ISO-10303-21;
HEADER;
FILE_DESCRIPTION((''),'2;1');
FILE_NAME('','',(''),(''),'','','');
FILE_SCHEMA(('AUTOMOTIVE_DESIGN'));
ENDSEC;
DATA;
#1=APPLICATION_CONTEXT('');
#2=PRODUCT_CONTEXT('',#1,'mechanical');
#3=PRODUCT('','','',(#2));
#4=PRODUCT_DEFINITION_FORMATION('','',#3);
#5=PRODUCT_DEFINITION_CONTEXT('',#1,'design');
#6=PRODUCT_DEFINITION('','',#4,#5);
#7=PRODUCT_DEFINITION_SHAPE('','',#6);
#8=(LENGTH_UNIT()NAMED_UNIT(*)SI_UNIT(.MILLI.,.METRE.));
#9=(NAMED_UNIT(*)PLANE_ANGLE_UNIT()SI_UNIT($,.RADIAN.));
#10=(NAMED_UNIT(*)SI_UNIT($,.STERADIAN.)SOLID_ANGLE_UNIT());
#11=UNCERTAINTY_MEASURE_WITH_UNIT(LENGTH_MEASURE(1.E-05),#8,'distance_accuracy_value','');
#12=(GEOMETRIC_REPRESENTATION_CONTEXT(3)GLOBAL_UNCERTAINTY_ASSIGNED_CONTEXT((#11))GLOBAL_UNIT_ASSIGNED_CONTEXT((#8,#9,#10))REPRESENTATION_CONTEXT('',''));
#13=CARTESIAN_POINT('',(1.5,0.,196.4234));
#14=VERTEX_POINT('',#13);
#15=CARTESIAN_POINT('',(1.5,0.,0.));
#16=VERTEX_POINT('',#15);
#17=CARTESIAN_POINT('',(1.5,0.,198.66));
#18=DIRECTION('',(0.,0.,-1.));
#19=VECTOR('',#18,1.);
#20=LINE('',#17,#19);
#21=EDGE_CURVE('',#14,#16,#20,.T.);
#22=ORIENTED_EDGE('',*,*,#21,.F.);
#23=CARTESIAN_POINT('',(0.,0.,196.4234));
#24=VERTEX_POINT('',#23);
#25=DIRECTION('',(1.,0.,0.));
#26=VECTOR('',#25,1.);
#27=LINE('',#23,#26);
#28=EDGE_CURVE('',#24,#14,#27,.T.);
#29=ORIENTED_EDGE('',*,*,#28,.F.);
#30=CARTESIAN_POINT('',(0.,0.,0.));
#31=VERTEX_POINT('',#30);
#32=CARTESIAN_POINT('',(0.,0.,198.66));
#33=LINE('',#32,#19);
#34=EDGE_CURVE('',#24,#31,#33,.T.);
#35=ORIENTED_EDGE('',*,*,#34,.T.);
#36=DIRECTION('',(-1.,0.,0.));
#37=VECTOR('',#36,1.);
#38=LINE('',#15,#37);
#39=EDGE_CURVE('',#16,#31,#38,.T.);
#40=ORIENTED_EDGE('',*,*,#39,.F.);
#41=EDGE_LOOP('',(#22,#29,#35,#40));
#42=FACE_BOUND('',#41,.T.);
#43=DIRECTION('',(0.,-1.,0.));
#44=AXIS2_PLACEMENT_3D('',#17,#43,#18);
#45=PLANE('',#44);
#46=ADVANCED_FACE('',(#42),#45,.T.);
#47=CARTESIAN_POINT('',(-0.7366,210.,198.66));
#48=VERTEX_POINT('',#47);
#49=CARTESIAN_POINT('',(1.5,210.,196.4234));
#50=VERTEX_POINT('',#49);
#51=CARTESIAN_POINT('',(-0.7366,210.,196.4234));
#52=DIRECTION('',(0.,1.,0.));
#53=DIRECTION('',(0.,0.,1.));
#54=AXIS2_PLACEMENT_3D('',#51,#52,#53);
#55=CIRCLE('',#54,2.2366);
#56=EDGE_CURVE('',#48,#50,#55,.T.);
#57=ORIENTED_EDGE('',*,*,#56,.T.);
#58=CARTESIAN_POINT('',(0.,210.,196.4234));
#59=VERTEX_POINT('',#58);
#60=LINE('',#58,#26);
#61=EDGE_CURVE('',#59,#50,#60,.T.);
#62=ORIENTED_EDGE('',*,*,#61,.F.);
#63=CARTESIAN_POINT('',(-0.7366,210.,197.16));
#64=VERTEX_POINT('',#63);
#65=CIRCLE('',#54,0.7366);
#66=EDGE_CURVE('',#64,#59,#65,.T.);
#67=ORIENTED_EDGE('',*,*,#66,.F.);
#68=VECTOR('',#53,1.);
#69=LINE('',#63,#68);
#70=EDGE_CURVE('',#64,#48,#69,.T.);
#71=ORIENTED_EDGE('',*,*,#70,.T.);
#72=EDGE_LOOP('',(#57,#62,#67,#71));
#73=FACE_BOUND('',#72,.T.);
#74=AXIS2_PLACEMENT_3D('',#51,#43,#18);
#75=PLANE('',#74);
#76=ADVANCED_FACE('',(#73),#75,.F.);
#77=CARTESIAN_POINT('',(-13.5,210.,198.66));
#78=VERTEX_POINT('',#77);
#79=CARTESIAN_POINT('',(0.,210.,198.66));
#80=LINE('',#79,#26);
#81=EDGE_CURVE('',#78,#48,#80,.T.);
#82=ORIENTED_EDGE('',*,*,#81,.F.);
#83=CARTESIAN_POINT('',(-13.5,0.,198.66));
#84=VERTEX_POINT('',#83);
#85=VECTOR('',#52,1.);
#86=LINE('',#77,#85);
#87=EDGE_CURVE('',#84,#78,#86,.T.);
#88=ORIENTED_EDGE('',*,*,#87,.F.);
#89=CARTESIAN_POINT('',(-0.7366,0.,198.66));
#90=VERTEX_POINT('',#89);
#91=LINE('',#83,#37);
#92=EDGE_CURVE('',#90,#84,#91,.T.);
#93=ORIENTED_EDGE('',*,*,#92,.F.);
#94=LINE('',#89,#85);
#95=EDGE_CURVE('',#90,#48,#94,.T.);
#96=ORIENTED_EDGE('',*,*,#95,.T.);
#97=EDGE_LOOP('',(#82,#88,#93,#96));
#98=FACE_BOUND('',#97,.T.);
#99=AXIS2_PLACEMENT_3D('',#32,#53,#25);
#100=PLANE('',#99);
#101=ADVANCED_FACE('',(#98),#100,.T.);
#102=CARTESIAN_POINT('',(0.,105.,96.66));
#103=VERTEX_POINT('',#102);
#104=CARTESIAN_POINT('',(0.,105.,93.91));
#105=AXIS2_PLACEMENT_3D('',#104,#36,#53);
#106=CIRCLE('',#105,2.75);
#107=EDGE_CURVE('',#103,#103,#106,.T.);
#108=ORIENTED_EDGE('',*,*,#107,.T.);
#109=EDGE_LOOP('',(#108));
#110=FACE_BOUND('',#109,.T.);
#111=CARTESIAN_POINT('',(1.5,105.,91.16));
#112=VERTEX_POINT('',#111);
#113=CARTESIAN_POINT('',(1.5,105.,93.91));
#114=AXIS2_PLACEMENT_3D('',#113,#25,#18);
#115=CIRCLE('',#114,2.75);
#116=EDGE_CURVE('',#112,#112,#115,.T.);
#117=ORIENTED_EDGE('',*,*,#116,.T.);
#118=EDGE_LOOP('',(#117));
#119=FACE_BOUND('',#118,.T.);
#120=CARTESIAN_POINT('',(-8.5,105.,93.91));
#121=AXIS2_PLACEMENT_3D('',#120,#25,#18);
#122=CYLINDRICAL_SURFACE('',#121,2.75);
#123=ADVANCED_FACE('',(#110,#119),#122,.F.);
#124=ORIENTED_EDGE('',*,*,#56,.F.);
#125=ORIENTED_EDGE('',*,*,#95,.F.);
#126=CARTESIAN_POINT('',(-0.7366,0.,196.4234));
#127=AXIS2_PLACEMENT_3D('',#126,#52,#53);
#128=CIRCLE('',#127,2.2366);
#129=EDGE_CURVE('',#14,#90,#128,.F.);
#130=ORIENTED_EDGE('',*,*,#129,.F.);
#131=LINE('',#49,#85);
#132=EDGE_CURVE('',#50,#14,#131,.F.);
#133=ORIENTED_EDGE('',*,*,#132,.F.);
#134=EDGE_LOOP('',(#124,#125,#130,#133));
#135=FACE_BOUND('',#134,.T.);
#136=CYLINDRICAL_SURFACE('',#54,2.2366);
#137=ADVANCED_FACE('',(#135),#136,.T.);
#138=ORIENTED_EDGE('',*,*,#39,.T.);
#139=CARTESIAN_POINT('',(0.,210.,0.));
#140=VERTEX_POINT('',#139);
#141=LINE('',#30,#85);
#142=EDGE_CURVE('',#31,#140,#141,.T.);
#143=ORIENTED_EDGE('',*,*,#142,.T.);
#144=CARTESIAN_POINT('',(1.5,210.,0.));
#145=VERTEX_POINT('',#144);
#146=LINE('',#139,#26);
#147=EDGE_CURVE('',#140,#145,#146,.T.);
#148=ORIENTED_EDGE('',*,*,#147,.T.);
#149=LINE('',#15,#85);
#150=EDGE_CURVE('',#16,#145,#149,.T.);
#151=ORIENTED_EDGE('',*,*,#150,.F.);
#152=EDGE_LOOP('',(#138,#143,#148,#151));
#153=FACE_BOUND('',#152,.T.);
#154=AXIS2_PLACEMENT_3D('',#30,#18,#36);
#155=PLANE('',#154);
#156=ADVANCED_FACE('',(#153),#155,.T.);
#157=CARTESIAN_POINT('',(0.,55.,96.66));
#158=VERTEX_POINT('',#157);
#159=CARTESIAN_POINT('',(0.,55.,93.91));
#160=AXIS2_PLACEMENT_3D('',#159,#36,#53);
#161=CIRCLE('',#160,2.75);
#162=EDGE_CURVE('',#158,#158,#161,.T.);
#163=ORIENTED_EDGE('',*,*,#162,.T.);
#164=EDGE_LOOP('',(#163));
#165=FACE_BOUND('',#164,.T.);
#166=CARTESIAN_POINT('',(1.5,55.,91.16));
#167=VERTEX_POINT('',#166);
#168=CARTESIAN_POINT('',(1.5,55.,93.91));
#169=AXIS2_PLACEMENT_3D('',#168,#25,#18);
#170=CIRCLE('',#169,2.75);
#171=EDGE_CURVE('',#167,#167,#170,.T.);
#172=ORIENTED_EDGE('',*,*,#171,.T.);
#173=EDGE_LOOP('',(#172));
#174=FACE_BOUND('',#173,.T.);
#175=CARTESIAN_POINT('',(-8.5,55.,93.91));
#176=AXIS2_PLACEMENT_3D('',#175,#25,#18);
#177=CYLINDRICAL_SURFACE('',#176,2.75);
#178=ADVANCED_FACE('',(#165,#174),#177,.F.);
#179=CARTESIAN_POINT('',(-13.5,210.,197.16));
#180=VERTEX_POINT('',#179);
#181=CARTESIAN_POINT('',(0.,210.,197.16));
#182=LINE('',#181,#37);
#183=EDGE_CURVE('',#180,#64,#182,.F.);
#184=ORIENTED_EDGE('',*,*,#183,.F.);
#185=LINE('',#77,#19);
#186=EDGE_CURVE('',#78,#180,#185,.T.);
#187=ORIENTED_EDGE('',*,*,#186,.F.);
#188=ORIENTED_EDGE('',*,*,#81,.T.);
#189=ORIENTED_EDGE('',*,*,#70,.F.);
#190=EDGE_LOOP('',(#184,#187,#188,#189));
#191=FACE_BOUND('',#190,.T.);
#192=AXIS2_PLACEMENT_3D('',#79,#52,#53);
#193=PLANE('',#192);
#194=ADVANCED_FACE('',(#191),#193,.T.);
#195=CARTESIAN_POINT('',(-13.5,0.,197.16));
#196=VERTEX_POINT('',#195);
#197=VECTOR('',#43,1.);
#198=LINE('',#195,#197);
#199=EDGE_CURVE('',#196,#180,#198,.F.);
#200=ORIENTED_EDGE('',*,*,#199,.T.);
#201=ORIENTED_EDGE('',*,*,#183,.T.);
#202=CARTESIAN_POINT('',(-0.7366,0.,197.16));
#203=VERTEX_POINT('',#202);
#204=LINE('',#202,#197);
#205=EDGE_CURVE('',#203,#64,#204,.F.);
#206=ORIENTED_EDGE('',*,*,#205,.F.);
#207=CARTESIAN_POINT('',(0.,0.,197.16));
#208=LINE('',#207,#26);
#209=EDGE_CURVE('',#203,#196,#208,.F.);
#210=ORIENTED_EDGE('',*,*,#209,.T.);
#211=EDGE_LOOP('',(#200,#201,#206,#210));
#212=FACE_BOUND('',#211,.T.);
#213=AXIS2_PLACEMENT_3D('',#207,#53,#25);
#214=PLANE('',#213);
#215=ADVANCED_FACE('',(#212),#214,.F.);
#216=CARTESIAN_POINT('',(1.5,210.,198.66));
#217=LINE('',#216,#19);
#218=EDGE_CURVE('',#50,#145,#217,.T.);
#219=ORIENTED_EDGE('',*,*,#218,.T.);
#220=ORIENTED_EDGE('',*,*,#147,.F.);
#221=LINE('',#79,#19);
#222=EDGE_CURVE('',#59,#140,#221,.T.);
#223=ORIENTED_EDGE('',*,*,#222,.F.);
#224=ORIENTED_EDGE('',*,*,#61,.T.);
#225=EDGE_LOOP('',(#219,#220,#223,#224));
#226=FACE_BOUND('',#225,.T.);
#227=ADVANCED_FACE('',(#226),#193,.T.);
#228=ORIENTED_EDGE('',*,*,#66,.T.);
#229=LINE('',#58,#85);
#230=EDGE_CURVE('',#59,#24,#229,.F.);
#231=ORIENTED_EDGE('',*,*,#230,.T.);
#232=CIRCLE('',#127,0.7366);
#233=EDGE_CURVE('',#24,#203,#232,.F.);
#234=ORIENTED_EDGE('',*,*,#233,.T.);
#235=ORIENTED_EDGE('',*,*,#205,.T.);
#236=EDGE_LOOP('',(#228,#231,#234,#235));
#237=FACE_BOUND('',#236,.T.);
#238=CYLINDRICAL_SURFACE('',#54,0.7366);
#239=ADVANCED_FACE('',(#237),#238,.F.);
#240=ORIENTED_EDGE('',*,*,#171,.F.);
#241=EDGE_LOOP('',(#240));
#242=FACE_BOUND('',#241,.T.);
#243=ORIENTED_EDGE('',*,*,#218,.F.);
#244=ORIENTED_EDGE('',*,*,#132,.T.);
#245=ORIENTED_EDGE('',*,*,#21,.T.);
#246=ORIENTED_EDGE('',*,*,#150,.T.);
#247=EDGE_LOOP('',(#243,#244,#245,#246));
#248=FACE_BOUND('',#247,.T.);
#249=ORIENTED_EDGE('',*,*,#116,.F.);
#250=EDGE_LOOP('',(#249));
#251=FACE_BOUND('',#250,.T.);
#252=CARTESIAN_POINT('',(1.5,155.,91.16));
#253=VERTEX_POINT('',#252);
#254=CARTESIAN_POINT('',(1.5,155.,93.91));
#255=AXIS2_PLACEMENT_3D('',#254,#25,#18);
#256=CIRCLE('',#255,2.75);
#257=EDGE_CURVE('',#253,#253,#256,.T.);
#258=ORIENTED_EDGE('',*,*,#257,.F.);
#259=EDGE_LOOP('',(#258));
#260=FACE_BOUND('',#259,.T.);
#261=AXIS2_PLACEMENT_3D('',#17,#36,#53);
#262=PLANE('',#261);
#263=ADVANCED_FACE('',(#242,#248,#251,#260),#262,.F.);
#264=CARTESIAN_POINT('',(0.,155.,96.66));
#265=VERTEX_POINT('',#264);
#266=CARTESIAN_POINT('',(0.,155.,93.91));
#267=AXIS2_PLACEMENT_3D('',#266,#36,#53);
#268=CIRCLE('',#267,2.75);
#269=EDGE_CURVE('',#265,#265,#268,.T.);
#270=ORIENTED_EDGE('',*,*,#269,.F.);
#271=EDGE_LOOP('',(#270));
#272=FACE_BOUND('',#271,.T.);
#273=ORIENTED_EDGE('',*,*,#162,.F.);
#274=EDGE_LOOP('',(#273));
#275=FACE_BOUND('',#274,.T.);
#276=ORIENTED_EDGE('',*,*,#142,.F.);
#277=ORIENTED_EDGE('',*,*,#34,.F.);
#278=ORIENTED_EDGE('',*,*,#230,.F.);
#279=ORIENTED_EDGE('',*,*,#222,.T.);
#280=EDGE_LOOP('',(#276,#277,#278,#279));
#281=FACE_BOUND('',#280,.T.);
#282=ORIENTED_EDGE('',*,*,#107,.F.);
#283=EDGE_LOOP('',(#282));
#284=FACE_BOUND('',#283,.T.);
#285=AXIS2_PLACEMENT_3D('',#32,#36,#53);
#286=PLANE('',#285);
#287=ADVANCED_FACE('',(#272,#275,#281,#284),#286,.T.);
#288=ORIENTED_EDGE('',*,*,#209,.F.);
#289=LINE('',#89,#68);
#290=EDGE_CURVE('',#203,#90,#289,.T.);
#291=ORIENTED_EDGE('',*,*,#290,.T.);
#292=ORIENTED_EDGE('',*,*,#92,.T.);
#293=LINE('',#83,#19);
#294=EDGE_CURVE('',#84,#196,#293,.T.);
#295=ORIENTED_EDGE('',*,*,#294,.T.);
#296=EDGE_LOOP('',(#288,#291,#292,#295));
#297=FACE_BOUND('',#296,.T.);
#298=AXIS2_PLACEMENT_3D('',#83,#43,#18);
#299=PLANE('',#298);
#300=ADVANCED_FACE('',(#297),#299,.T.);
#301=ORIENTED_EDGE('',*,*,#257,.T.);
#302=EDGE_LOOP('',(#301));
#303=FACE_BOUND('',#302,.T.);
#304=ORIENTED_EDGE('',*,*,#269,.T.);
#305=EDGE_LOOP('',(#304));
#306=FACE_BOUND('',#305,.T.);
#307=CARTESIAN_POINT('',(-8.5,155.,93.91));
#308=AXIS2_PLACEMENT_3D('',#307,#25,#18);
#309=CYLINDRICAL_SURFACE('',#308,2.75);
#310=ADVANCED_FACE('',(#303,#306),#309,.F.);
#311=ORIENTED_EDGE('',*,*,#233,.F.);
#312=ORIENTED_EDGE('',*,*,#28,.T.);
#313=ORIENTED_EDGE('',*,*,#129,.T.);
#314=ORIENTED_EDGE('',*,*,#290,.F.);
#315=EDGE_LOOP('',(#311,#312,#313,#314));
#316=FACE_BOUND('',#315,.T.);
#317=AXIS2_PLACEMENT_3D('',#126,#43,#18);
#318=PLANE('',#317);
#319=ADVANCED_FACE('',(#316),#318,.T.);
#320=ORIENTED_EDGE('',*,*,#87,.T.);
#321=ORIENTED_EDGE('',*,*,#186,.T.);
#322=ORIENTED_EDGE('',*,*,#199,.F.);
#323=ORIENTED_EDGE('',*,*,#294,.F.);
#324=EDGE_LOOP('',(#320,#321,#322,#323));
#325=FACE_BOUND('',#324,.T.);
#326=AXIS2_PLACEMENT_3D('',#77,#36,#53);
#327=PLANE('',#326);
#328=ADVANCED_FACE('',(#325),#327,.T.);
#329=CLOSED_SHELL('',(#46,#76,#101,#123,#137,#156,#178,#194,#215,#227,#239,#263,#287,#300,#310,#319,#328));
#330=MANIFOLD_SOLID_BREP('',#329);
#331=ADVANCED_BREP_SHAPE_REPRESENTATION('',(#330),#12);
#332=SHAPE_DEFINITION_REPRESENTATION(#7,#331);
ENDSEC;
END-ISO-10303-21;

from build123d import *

# Parameters (mm, degrees)
SKETCH_1_W                       = 1.5
SKETCH_1_H                       = 210
SM_BASE_FLANGE_1_DEPTH           = 198.66
SKETCH_6_R                       = 2.75
CUT_EXTRUDE_1_DEPTH              = 10
SM_EDGE_FLANGE_1_STRIP_W         = 7.4732
SM_EDGE_FLANGE_1_STRIP_H         = 1.5
SM_EDGE_FLANGE_1_STRIP_CUT_DEPTH = 210
SM_EDGE_FLANGE_1_DEPTH           = 210


# Sheet-metal steps are written as plain solids
with BuildPart() as part:
    # Sketch 1 → 基体-法兰1 (new body)
    with BuildSketch(Plane.XY):
        with Locations((0.75, 105)):
            Rectangle(SKETCH_1_W, SKETCH_1_H)
    extrude(amount=SM_BASE_FLANGE_1_DEPTH)

    # 草图6 → 切除-拉伸1 (cut)
    with BuildSketch(Plane(origin=(1.5, 0, 0), x_dir=(0, 0, -1), z_dir=(1, 0, 0))):
        with Locations((-93.91, 55)):
            Circle(SKETCH_6_R)
        with Locations((-93.91, 155)):
            Circle(SKETCH_6_R)
        with Locations((-93.91, 105)):
            Circle(SKETCH_6_R)
    extrude(amount=-CUT_EXTRUDE_1_DEPTH, mode=Mode.SUBTRACT)

    # 边线-法兰1 strip (across the edge) → 边线-法兰1 strip cut (cut)
    with BuildSketch(Plane(origin=(0, 0, 198.66), x_dir=(0, 0, -1), z_dir=(0, 1, 0))):
        with Locations((-1.5, -0.75)):
            Rectangle(SM_EDGE_FLANGE_1_STRIP_W, SM_EDGE_FLANGE_1_STRIP_H)
    extrude(amount=SM_EDGE_FLANGE_1_STRIP_CUT_DEPTH, mode=Mode.SUBTRACT)

    # 边线-法兰1 section (across the edge) → 边线-法兰1 (add)
    with BuildSketch(Plane(origin=(0, 0, 198.66), x_dir=(0, 0, -1), z_dir=(0, 1, 0))):
        with BuildLine():
            Line((0, 0.7366), (0, 13.5))
            Line((0, 13.5), (1.5, 13.5))
            Line((1.5, 13.5), (1.5, 0.7366))
            ThreePointArc((1.5, 0.7366), (1.715745145, 0.215745145), (2.2366, 0))
            Line((2.2366, 0), (2.2366, -1.5))
            ThreePointArc((2.2366, -1.5), (0.655084973, -0.844915027), (0, 0.7366))
        make_face()
    extrude(amount=SM_EDGE_FLANGE_1_DEPTH)


solid = part.part
